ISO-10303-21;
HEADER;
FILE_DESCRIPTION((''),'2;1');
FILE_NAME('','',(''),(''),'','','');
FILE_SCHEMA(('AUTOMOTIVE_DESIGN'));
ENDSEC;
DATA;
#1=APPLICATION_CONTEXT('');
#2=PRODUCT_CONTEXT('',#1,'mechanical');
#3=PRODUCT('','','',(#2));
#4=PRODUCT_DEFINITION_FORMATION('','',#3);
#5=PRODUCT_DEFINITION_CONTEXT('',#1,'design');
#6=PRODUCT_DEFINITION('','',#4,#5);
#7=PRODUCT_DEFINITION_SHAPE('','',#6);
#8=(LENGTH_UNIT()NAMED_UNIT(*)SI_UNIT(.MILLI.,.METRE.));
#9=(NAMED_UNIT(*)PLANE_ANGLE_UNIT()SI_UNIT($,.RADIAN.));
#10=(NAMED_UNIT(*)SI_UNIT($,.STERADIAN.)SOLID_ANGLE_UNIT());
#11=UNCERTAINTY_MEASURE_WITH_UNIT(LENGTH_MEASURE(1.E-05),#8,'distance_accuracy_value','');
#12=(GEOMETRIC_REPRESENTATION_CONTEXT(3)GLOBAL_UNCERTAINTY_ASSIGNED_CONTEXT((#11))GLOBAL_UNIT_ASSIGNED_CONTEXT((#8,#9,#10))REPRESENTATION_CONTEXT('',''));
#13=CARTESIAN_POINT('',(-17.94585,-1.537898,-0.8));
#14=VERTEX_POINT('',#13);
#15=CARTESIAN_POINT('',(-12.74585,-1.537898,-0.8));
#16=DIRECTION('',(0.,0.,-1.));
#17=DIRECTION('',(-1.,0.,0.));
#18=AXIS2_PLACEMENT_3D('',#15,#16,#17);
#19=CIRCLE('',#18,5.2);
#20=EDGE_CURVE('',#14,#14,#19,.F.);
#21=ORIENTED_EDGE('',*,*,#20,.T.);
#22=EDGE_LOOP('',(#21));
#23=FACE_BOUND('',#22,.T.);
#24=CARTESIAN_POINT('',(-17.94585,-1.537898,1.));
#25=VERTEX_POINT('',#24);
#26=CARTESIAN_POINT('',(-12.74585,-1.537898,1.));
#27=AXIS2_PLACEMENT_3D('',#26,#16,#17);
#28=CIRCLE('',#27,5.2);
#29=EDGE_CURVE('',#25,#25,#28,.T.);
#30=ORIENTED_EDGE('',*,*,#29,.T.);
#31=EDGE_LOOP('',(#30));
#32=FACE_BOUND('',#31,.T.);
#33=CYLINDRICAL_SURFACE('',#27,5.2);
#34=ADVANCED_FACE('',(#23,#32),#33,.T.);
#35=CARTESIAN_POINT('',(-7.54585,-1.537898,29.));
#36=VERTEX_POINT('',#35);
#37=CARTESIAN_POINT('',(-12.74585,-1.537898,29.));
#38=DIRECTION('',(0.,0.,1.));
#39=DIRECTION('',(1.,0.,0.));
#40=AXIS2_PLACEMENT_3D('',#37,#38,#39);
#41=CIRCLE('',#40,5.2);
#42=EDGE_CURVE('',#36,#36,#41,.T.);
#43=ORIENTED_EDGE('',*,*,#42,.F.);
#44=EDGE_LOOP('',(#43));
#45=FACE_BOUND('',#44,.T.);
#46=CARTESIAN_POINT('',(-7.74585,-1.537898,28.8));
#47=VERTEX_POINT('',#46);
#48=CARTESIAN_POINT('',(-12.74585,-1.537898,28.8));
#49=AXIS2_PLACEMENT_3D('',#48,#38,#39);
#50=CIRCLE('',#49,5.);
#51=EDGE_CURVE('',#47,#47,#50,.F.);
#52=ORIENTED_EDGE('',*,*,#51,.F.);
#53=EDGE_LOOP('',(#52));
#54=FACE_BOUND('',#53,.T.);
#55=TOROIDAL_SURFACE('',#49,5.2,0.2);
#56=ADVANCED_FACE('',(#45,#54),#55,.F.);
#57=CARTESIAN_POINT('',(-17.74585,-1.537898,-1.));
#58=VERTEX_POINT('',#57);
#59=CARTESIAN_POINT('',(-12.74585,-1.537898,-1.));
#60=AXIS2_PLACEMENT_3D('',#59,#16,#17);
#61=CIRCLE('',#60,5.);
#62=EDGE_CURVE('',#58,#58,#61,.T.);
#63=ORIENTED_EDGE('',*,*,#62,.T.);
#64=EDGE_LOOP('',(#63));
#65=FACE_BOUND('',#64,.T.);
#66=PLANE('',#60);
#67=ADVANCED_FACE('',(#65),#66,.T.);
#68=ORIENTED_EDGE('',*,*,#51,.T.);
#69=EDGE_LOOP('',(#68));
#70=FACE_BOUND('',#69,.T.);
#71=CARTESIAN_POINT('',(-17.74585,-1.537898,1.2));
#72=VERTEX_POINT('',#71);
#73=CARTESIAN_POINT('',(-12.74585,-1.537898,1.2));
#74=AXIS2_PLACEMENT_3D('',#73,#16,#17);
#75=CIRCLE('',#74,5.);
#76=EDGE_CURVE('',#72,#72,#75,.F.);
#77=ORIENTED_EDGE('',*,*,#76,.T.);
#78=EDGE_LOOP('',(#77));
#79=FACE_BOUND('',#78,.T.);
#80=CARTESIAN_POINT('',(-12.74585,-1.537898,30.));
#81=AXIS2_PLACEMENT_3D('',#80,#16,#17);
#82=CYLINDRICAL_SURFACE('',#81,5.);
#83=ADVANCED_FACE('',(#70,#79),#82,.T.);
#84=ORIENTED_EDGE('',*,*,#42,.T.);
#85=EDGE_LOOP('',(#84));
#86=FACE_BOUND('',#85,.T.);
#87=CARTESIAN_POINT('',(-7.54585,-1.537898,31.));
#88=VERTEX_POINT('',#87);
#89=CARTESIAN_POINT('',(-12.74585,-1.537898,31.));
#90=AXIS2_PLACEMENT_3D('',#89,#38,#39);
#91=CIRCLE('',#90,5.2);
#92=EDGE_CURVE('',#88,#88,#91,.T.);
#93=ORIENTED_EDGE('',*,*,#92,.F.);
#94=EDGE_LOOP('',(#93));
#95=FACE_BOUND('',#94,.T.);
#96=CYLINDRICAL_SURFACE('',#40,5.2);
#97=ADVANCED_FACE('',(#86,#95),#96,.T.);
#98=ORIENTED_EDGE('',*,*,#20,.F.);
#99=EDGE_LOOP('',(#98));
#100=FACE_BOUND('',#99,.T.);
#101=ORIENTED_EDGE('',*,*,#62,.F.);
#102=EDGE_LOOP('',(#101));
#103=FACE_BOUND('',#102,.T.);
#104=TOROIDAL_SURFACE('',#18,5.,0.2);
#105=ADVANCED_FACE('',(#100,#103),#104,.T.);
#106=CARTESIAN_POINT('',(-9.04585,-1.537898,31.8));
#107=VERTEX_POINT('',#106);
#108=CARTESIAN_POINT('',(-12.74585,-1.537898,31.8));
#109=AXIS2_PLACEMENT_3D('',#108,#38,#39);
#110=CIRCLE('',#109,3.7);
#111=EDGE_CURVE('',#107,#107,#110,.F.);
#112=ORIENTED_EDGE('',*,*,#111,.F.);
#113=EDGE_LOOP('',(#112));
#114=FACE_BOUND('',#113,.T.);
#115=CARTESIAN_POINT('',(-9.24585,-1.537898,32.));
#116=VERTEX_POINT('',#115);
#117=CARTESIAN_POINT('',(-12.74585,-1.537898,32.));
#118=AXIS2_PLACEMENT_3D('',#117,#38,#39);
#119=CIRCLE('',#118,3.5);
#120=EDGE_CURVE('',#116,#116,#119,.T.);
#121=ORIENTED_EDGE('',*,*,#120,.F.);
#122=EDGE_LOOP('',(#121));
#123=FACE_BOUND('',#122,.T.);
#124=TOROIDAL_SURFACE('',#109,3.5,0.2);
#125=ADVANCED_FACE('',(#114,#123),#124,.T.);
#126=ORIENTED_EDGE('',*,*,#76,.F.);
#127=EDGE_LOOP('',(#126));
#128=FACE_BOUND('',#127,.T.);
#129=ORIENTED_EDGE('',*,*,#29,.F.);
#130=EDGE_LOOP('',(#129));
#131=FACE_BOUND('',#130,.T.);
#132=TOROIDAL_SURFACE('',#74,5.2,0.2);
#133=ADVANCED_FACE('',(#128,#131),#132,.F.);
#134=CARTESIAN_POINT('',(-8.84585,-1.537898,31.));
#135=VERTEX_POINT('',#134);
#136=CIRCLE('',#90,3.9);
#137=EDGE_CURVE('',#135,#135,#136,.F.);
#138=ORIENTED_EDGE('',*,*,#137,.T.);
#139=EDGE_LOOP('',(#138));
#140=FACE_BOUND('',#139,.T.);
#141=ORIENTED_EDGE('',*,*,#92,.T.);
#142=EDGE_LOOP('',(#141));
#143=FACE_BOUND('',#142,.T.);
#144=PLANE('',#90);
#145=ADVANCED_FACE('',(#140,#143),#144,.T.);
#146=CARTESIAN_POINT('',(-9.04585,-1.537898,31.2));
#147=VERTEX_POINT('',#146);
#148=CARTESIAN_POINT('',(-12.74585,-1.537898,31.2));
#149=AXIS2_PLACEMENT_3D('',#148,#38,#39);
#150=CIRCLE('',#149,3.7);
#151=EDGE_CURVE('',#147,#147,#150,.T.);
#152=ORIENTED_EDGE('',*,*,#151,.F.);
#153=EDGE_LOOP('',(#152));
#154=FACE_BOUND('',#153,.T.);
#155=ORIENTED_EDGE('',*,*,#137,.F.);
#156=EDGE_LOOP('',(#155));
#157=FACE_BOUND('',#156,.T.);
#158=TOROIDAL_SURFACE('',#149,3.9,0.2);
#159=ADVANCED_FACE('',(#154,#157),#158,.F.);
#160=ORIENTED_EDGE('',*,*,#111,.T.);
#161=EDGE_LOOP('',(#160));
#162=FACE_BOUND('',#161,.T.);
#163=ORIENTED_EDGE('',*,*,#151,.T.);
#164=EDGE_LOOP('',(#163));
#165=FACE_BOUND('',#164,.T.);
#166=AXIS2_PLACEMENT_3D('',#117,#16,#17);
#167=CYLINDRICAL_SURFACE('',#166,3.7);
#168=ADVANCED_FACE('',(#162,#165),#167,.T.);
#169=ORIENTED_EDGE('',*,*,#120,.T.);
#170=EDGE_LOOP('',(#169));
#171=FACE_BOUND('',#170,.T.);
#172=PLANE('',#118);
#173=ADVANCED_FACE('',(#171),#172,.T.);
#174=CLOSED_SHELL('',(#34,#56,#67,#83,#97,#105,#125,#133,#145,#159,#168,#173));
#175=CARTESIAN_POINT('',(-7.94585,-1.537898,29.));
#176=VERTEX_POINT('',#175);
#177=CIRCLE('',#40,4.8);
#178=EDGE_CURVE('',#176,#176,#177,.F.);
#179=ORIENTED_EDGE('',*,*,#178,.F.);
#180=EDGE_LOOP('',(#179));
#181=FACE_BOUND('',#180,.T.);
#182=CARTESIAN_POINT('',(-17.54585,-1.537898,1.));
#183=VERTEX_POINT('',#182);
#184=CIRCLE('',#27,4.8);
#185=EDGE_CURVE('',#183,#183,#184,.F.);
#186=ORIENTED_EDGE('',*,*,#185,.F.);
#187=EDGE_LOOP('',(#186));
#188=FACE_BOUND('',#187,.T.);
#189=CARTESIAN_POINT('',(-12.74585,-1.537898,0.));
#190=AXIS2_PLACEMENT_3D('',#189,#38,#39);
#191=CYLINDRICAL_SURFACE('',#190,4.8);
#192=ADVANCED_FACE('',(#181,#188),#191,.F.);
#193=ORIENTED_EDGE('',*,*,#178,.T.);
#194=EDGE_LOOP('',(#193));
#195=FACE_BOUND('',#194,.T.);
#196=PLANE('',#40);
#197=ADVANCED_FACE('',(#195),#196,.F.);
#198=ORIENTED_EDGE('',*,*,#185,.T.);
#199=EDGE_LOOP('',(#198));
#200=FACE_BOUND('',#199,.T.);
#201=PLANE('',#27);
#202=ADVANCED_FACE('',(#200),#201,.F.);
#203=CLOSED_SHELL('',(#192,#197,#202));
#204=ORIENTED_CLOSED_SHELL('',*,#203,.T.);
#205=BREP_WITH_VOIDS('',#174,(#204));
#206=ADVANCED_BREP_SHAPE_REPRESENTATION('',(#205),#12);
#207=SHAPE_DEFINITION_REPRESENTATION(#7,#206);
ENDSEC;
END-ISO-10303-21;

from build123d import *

# Parameters (mm, degrees)
ESBO_O1_R                     = 5
RESSALTO_EXTRUS_O1_DEPTH      = 30
ESBO_O2_R                     = 4.8
CORTE_EXTRUS_O1_DEPTH         = 30
RESSALTO_EXTRUS_O2_DEPTH      = 1
RESSALTO_EXTRUS_O2_DEPTH_BACK = 1
ESBO_O3_R                     = 5.2
ESBO_O4_R                     = 3.7
RESSALTO_EXTRUS_O3_DEPTH      = 1
RESSALTO_EXTRUS_O6_DEPTH      = 1
RESSALTO_EXTRUS_O6_DEPTH_BACK = 1
ESBO_O7_R                     = 5.2
FILETE1_R                     = 0.2


with BuildPart() as part:
    # Esboço1 → Ressalto-extrusão1 (new body)
    with BuildSketch(Plane.XY):
        with Locations((-12.745849563, -1.537898167)):
            Circle(ESBO_O1_R)
    extrude(amount=RESSALTO_EXTRUS_O1_DEPTH)

    # Esboço2 → Corte-extrusão1 (cut)
    with BuildSketch(Plane.XY.offset(30)):
        with Locations((-12.745849563, -1.537898167)):
            Circle(ESBO_O2_R)
    extrude(amount=-CORTE_EXTRUS_O1_DEPTH, mode=Mode.SUBTRACT)

    # Esboço3 → Ressalto-extrusão2 (add, two sides: drawn at the far end of the back side and taken through both)
    with BuildSketch(Plane.XY.offset(30).offset(-RESSALTO_EXTRUS_O2_DEPTH_BACK)):
        with Locations((-12.745849563, -1.537898167)):
            Circle(ESBO_O3_R)
    extrude(amount=RESSALTO_EXTRUS_O2_DEPTH + RESSALTO_EXTRUS_O2_DEPTH_BACK)

    # Esboço4 → Ressalto-extrusão3 (add)
    with BuildSketch(Plane.XY.offset(31)):
        with Locations((-12.745849563, -1.537898167)):
            Circle(ESBO_O4_R)
    extrude(amount=RESSALTO_EXTRUS_O3_DEPTH)

    # Esboço7 → Ressalto-extrusão6 (add, two sides: drawn at the far end of the back side and taken through both)
    with BuildSketch(Plane(origin=(0, 0, 0), x_dir=(-1, 0, 0), z_dir=(0, 0, -1)).offset(-RESSALTO_EXTRUS_O6_DEPTH_BACK)):
        with Locations(Location((12.745849563, -1.537898167, 0), (0, 0, 180))):
            Circle(ESBO_O7_R)
    extrude(amount=RESSALTO_EXTRUS_O6_DEPTH + RESSALTO_EXTRUS_O6_DEPTH_BACK)

    # Filete1
    filete1_edges = [part.edges().sort_by_distance(p)[0] for p in [
        (-17.745849563, -1.537898167, 29),
        (-16.445849563, -1.537898167, 31),
        (-16.445849563, -1.537898167, 32),
        (-17.745849563, -1.537898167, 1),
        (-17.945849563, -1.537898167, -1),
    ]]
    fillet(filete1_edges, radius=FILETE1_R - 0.0001)  # a hair under: the kernel refuses the full size


solid = part.part
